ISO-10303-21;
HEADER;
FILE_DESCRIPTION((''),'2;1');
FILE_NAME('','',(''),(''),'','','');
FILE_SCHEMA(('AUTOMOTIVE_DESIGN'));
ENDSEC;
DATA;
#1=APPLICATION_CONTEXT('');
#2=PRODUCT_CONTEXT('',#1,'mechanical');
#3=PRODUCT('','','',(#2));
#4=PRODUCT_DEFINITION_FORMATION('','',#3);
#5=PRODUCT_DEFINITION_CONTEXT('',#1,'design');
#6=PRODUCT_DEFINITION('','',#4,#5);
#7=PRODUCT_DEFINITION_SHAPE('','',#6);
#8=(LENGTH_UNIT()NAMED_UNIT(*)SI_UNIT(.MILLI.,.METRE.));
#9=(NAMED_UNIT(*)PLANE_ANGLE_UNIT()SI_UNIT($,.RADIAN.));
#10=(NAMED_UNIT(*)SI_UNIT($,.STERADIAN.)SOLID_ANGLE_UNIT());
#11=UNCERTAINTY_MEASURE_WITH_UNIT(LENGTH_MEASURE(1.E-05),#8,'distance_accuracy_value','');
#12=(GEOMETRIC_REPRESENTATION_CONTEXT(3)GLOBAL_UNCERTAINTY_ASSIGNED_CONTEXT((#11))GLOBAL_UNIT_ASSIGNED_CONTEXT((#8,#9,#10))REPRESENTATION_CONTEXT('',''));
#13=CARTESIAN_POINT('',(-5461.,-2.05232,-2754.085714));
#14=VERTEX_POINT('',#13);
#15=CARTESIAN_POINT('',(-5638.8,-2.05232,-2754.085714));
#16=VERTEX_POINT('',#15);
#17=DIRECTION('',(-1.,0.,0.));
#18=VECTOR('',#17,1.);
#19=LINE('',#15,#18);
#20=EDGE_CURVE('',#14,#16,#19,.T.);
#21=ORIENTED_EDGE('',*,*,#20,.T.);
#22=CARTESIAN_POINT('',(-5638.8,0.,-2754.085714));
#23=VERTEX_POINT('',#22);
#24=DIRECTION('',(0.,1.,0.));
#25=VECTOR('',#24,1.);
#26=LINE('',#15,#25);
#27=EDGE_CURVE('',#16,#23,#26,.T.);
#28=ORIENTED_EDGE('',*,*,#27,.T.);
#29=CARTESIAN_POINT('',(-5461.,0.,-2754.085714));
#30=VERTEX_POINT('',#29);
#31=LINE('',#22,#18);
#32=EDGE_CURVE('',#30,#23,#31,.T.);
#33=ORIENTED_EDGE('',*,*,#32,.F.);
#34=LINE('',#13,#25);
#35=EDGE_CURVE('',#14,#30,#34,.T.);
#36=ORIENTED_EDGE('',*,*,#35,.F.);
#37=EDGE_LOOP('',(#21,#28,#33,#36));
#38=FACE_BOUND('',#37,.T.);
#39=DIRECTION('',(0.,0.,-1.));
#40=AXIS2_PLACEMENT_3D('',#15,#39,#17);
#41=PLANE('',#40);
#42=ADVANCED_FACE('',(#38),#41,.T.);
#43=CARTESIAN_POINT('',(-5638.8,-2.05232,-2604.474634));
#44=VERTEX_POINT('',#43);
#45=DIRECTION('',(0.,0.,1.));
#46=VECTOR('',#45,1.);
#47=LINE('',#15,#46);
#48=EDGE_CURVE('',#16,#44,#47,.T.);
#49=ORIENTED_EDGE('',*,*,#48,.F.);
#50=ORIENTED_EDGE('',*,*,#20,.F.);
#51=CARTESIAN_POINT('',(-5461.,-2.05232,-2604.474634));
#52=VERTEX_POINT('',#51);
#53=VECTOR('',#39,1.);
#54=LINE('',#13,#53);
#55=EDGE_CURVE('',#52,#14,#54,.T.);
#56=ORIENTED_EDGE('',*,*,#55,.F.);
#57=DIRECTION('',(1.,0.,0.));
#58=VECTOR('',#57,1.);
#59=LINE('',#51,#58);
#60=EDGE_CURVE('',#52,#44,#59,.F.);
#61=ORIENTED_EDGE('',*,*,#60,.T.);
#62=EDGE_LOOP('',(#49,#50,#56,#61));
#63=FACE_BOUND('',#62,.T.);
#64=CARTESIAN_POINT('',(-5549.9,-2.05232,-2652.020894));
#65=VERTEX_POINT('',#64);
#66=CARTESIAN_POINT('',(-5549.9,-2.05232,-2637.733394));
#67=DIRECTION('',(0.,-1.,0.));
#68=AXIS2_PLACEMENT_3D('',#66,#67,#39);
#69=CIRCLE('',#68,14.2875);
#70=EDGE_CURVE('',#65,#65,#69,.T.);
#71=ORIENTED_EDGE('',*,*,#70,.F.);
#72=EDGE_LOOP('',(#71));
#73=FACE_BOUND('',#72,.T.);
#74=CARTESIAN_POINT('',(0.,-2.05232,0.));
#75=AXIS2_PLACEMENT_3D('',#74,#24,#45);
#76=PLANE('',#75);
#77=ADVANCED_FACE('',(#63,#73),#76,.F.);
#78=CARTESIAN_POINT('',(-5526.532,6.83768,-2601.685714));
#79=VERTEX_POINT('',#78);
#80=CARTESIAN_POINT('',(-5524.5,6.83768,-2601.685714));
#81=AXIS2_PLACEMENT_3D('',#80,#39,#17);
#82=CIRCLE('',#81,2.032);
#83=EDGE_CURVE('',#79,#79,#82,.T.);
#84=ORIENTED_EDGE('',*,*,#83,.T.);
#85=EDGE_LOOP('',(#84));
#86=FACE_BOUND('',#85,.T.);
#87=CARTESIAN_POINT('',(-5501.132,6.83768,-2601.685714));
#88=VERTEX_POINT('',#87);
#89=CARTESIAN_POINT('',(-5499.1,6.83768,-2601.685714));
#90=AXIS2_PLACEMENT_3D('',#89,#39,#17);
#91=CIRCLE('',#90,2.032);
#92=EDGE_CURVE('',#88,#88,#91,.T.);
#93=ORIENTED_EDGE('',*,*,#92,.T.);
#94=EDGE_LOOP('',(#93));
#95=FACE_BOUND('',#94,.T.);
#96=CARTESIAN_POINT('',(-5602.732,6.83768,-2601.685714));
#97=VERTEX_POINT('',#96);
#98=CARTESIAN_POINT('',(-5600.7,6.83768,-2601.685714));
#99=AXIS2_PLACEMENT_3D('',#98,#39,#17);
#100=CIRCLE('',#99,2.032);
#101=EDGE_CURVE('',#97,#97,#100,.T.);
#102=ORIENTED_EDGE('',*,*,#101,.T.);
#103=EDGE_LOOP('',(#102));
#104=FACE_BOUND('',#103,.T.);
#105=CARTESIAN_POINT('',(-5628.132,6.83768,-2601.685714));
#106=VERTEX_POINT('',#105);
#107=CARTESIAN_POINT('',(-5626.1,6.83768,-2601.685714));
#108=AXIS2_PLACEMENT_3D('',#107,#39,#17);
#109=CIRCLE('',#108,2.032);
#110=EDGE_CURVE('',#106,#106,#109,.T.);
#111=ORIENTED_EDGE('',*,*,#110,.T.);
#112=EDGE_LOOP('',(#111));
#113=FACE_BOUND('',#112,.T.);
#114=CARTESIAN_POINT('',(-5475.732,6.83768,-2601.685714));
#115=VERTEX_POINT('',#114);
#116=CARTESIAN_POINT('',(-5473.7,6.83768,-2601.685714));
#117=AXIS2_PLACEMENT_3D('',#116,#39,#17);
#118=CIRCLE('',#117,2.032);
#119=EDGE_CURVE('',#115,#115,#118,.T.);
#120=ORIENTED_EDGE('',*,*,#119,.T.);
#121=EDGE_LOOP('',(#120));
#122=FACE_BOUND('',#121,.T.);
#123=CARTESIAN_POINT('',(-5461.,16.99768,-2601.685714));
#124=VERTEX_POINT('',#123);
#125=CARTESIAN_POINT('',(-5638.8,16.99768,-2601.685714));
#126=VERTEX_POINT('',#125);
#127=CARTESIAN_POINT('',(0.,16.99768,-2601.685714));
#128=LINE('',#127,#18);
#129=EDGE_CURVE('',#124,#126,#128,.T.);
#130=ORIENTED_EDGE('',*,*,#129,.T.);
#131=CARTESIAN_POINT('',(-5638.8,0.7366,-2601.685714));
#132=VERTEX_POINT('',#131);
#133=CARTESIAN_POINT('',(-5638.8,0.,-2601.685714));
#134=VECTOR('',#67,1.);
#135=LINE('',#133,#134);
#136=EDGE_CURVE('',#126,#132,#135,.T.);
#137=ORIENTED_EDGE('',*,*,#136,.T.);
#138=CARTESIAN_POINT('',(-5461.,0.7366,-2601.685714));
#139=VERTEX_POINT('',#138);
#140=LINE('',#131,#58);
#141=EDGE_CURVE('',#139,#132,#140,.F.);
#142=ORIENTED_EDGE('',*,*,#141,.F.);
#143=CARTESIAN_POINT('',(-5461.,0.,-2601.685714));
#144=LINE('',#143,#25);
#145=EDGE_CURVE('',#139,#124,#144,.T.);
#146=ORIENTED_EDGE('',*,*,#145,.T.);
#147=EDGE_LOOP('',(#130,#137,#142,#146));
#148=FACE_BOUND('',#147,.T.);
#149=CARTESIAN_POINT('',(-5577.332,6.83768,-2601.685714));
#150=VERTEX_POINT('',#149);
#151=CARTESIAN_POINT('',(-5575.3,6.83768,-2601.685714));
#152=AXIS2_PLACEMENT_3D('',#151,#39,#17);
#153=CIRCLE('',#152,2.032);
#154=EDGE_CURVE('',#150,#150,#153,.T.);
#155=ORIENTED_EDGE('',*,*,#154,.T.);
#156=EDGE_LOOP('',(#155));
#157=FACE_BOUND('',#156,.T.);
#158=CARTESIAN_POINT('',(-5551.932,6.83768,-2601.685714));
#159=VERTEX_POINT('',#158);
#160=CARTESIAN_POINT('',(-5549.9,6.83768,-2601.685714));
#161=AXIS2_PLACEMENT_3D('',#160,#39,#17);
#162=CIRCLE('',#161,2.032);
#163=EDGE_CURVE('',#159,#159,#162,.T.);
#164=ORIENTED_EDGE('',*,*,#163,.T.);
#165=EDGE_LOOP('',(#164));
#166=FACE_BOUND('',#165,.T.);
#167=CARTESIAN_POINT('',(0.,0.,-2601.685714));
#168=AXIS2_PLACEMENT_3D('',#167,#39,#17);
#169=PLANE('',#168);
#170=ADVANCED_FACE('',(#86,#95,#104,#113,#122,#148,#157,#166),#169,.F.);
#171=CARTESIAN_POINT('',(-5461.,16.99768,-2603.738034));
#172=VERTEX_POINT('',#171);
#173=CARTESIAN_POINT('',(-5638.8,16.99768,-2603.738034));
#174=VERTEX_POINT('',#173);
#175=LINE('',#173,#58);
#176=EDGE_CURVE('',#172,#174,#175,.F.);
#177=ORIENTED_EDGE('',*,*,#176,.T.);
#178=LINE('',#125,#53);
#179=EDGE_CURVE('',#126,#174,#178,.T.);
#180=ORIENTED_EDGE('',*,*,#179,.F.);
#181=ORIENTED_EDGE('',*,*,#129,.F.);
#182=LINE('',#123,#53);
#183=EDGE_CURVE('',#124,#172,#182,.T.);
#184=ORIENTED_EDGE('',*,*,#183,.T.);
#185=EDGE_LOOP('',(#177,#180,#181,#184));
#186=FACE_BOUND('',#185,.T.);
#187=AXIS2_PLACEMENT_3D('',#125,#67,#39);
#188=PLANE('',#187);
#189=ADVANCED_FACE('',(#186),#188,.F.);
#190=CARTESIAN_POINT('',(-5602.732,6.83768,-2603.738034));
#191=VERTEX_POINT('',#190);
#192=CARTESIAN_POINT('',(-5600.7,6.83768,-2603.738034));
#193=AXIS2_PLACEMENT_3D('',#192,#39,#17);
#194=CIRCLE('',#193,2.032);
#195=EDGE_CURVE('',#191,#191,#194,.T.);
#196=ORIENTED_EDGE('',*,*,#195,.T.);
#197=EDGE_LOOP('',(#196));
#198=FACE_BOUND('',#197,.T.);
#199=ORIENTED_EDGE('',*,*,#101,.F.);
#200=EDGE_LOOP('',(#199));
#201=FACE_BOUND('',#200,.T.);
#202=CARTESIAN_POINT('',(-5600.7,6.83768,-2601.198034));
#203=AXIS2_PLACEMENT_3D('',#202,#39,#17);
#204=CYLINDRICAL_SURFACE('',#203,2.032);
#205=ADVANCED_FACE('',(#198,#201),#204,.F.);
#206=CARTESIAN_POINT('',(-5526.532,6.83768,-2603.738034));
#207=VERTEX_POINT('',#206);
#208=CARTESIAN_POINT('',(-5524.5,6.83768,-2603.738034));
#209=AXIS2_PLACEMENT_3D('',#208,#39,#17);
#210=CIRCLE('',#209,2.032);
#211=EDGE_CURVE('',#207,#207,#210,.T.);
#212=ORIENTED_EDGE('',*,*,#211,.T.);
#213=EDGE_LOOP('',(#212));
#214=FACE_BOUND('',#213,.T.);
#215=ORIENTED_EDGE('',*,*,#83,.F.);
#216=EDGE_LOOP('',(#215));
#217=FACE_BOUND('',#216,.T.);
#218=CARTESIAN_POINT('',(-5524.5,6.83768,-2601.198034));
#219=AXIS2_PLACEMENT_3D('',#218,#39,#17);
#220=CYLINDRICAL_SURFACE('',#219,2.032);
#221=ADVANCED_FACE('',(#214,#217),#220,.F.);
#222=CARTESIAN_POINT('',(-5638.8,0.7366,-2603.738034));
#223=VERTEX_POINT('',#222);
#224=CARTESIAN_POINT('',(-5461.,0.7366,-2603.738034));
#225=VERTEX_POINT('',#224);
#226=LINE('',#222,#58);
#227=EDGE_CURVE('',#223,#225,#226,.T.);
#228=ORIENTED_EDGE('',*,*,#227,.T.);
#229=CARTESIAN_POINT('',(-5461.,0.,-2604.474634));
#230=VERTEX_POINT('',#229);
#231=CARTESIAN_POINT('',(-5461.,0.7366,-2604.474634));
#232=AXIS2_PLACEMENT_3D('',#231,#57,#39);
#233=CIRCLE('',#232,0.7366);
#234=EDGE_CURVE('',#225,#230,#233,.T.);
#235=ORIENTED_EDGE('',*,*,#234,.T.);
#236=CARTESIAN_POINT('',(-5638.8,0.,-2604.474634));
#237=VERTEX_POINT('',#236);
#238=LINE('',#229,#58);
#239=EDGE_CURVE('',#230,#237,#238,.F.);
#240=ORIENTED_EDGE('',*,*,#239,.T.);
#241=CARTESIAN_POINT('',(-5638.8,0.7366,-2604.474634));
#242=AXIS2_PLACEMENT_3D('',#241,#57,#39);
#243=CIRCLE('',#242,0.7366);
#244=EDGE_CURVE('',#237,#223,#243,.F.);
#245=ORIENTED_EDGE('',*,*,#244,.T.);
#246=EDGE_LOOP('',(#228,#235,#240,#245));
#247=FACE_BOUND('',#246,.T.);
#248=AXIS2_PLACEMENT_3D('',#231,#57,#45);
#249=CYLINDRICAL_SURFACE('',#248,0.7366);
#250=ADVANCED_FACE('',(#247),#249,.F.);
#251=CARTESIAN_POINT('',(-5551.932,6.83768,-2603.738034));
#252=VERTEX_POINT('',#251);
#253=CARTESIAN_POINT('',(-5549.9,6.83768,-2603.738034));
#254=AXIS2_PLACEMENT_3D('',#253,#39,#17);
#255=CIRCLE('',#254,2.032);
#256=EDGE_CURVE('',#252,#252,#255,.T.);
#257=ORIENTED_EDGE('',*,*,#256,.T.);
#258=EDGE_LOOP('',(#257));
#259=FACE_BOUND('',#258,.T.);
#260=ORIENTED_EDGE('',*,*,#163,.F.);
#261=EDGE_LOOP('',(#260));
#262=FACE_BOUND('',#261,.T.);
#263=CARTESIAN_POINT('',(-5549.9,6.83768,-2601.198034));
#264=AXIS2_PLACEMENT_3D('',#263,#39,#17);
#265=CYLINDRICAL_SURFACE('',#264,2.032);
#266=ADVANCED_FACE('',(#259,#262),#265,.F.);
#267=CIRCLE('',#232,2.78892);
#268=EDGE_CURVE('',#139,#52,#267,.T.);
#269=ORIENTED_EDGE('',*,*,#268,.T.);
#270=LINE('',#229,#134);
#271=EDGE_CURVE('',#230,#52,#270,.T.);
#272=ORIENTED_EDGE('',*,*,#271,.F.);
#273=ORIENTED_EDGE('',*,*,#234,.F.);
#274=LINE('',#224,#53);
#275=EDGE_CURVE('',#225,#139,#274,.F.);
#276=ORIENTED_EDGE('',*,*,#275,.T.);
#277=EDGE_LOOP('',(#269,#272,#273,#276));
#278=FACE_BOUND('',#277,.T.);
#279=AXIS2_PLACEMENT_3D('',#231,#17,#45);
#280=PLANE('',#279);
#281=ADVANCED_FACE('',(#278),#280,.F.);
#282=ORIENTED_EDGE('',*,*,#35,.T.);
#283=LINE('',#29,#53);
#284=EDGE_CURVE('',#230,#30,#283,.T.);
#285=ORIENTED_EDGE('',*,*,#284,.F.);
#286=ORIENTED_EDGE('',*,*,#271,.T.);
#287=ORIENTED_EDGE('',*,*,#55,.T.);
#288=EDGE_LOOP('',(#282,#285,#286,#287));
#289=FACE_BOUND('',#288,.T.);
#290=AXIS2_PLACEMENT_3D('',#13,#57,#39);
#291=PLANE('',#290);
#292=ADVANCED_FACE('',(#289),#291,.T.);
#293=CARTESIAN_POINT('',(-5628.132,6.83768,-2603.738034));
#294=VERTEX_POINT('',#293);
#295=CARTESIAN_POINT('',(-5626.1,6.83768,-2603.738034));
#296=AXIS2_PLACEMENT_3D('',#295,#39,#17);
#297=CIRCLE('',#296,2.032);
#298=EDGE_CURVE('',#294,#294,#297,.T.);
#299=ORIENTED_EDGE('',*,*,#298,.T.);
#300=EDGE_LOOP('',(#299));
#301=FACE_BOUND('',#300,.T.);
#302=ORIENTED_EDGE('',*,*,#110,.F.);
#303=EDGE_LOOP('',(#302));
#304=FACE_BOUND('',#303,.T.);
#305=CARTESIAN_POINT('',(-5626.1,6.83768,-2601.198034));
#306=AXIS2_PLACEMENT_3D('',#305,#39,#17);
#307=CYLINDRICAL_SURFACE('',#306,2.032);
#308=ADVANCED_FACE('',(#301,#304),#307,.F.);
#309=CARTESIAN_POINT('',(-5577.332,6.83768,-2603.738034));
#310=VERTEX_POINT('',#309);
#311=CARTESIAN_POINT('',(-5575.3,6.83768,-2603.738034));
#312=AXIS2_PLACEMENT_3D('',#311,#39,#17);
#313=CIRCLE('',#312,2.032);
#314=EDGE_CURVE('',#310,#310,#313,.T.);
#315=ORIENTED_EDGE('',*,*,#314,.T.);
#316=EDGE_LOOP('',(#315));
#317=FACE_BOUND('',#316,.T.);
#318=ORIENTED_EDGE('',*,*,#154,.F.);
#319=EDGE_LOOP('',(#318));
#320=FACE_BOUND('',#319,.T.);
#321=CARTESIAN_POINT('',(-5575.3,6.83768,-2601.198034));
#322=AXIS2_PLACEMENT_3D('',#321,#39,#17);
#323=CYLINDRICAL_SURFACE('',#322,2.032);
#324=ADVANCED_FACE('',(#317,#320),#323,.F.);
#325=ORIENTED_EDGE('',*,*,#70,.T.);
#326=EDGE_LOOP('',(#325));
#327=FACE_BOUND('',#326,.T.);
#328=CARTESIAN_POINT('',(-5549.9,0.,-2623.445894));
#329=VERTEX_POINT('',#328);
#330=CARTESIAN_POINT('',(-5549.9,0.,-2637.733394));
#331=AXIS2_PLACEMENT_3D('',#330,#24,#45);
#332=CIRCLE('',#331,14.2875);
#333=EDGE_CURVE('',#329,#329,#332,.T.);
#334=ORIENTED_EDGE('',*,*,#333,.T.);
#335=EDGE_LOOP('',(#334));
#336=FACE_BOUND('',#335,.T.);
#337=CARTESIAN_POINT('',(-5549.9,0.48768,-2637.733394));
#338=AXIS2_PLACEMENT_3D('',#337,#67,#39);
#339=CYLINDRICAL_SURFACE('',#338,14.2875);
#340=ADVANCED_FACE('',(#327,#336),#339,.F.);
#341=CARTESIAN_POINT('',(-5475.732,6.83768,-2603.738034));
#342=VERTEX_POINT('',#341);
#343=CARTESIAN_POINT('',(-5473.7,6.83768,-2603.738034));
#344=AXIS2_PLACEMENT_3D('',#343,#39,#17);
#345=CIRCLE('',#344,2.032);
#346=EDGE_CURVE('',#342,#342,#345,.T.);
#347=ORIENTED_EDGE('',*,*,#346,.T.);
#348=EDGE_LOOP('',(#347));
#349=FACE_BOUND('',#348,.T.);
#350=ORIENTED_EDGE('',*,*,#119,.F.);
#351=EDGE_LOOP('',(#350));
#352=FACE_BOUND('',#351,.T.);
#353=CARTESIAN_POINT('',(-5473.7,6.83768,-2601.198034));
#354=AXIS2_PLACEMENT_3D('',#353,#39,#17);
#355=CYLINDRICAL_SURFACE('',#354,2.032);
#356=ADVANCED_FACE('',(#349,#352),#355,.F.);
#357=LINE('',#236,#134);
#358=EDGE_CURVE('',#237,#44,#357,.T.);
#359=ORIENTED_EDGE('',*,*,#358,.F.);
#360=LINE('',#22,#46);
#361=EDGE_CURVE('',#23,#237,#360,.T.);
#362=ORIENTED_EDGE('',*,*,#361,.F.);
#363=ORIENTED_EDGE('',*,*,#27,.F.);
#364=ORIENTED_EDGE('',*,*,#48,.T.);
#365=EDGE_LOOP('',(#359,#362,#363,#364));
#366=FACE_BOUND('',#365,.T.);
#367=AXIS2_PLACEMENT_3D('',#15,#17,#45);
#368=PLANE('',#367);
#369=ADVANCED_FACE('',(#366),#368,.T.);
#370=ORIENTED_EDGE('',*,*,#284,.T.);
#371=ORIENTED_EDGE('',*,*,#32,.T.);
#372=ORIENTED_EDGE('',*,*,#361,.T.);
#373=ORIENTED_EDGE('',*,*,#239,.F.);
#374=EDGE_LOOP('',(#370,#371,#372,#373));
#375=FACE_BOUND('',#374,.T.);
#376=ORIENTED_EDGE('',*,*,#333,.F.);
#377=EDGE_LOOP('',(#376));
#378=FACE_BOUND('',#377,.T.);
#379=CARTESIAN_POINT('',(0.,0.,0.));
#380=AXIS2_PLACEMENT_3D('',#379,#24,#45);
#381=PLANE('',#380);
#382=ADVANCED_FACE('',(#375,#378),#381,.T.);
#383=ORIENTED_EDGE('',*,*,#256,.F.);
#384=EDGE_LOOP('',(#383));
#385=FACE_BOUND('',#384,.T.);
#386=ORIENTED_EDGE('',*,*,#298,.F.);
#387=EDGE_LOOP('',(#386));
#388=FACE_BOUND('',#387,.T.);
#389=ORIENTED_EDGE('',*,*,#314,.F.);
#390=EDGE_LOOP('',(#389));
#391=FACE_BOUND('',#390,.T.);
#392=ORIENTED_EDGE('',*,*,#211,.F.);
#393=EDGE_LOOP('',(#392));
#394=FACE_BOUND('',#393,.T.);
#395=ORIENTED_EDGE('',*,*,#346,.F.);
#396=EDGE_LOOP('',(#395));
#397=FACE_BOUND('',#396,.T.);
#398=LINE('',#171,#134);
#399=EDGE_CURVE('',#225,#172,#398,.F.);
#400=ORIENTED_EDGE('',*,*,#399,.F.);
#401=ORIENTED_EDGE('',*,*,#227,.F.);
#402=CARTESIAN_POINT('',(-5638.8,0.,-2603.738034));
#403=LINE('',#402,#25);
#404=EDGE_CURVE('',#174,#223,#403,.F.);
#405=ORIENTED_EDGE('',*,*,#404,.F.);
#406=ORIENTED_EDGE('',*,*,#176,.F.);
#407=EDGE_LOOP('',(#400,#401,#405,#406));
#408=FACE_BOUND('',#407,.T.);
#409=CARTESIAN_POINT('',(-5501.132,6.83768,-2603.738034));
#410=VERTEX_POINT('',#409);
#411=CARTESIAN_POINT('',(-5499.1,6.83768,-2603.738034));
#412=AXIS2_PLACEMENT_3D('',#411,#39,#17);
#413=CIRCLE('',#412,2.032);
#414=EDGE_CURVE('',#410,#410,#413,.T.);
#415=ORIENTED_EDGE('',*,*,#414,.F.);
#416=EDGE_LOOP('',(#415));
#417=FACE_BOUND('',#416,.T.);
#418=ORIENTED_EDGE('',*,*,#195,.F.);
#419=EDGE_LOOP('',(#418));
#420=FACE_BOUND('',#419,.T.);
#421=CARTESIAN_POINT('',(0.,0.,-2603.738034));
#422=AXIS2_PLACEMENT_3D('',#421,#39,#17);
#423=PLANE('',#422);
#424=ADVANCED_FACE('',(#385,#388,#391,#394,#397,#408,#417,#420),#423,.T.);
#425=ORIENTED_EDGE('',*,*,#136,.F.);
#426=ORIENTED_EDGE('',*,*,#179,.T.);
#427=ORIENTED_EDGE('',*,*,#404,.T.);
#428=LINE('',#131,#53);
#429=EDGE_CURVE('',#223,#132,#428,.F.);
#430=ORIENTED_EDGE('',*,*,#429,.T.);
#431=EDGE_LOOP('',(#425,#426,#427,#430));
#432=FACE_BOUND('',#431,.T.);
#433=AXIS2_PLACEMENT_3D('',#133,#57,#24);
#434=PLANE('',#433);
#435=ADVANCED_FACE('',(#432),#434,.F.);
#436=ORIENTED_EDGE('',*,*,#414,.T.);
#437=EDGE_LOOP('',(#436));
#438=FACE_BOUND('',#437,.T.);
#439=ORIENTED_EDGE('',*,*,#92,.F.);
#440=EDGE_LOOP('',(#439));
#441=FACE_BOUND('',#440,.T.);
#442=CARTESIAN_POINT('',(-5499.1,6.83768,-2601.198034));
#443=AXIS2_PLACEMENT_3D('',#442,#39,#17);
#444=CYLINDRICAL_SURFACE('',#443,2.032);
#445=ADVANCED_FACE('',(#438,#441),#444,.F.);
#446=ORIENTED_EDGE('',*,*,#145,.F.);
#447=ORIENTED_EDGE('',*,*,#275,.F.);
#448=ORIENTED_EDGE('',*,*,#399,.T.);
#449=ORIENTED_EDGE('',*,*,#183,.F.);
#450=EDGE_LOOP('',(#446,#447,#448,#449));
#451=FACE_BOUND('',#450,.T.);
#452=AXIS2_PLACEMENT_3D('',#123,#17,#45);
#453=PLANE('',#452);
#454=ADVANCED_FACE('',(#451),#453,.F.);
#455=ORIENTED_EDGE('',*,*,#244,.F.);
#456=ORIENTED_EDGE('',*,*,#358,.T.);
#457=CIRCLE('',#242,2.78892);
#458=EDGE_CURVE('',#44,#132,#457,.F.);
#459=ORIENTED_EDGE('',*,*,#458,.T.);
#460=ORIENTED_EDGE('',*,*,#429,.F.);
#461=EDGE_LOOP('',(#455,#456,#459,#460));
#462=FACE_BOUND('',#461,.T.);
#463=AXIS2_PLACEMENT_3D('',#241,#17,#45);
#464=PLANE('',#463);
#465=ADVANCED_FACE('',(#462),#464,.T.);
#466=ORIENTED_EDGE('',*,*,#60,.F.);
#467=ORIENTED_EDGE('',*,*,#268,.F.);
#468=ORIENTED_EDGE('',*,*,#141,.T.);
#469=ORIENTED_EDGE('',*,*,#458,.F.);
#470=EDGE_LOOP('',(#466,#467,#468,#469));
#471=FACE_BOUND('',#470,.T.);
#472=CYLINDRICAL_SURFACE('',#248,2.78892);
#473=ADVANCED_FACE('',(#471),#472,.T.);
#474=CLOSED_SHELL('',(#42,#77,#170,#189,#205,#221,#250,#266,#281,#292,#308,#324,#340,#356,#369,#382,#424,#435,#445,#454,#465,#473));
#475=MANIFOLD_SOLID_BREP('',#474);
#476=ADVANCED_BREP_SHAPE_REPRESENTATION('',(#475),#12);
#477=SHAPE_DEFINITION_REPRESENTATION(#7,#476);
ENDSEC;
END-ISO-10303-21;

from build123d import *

# Parameters (mm, degrees)
SKETCH1_W                    = 177.8
SKETCH1_H                    = 152.4
BASE_FLANGE1_DEPTH           = 2.05232
EDGE_FLANGE1_STRIP_W         = 9.68248
EDGE_FLANGE1_STRIP_H         = 2.05232
EDGE_FLANGE1_STRIP_CUT_DEPTH = 177.8
EDGE_FLANGE1_DEPTH           = 177.8
SKETCH9_R                    = 2.032
CUT_EXTRUDE1_DEPTH           = 2.54
SKETCH10_R                   = 14.2875
CUT_EXTRUDE2_DEPTH           = 2.54


# Sheet-metal steps are written as plain solids
with BuildPart() as part:
    # Sketch1 → Base-Flange1 (new body)
    with BuildSketch(Plane(origin=(0, 0, 0), x_dir=(1, 0, 0), z_dir=(0, 1, 0))):
        with Locations((-5549.9, 2677.885714286)):
            Rectangle(SKETCH1_W, SKETCH1_H)
    extrude(amount=-BASE_FLANGE1_DEPTH)

    # Edge-Flange1 strip (across the edge) → Edge-Flange1 strip cut (cut)
    with BuildSketch(Plane(origin=(-5638.8, 0, -2601.685714286), x_dir=(0, 0, -1), z_dir=(1, 0, 0))):
        with Locations((-2.05232, -1.02616)):
            Rectangle(EDGE_FLANGE1_STRIP_W, EDGE_FLANGE1_STRIP_H)
    extrude(amount=EDGE_FLANGE1_STRIP_CUT_DEPTH, mode=Mode.SUBTRACT)

    # Edge-Flange1 section (across the edge) → Edge-Flange1 (add)
    with BuildSketch(Plane(origin=(-5638.8, 0, -2601.685714286), x_dir=(0, 0, -1), z_dir=(1, 0, 0))):
        with BuildLine():
            Line((0, 0.7366), (0, 16.99768))
            Line((0, 16.99768), (2.05232, 16.99768))
            Line((2.05232, 16.99768), (2.05232, 0.7366))
            ThreePointArc((2.05232, 0.7366), (2.268065145, 0.215745145), (2.78892, 0))
            Line((2.78892, 0), (2.78892, -2.05232))
            ThreePointArc((2.78892, -2.05232), (0.816855756, -1.235464244), (0, 0.7366))
        make_face()
    extrude(amount=EDGE_FLANGE1_DEPTH)

    # Sketch9 → Cut-Extrude1 (cut)
    with BuildSketch(Plane(origin=(0, 0, -2603.738034286), x_dir=(-1, 0, 0), z_dir=(0, 0, -1))):
        with Locations((5626.1, 6.83768)):
            Circle(SKETCH9_R)
        with Locations((5600.7, 6.83768)):
            Circle(SKETCH9_R)
        with Locations((5575.3, 6.83768)):
            Circle(SKETCH9_R)
        with Locations((5549.9, 6.83768)):
            Circle(SKETCH9_R)
        with Locations((5524.5, 6.83768)):
            Circle(SKETCH9_R)
        with Locations((5499.1, 6.83768)):
            Circle(SKETCH9_R)
        with Locations((5473.7, 6.83768)):
            Circle(SKETCH9_R)
    extrude(amount=-CUT_EXTRUDE1_DEPTH, mode=Mode.SUBTRACT)

    # Sketch10 → Cut-Extrude2 (cut)
    with BuildSketch(Plane.XZ.offset(2.05232)):
        with Locations(Location((-5549.9, -2637.733394286, 0), (0, 0, 270))):
            Circle(SKETCH10_R)
    extrude(amount=-CUT_EXTRUDE2_DEPTH, mode=Mode.SUBTRACT)


solid = part.part
